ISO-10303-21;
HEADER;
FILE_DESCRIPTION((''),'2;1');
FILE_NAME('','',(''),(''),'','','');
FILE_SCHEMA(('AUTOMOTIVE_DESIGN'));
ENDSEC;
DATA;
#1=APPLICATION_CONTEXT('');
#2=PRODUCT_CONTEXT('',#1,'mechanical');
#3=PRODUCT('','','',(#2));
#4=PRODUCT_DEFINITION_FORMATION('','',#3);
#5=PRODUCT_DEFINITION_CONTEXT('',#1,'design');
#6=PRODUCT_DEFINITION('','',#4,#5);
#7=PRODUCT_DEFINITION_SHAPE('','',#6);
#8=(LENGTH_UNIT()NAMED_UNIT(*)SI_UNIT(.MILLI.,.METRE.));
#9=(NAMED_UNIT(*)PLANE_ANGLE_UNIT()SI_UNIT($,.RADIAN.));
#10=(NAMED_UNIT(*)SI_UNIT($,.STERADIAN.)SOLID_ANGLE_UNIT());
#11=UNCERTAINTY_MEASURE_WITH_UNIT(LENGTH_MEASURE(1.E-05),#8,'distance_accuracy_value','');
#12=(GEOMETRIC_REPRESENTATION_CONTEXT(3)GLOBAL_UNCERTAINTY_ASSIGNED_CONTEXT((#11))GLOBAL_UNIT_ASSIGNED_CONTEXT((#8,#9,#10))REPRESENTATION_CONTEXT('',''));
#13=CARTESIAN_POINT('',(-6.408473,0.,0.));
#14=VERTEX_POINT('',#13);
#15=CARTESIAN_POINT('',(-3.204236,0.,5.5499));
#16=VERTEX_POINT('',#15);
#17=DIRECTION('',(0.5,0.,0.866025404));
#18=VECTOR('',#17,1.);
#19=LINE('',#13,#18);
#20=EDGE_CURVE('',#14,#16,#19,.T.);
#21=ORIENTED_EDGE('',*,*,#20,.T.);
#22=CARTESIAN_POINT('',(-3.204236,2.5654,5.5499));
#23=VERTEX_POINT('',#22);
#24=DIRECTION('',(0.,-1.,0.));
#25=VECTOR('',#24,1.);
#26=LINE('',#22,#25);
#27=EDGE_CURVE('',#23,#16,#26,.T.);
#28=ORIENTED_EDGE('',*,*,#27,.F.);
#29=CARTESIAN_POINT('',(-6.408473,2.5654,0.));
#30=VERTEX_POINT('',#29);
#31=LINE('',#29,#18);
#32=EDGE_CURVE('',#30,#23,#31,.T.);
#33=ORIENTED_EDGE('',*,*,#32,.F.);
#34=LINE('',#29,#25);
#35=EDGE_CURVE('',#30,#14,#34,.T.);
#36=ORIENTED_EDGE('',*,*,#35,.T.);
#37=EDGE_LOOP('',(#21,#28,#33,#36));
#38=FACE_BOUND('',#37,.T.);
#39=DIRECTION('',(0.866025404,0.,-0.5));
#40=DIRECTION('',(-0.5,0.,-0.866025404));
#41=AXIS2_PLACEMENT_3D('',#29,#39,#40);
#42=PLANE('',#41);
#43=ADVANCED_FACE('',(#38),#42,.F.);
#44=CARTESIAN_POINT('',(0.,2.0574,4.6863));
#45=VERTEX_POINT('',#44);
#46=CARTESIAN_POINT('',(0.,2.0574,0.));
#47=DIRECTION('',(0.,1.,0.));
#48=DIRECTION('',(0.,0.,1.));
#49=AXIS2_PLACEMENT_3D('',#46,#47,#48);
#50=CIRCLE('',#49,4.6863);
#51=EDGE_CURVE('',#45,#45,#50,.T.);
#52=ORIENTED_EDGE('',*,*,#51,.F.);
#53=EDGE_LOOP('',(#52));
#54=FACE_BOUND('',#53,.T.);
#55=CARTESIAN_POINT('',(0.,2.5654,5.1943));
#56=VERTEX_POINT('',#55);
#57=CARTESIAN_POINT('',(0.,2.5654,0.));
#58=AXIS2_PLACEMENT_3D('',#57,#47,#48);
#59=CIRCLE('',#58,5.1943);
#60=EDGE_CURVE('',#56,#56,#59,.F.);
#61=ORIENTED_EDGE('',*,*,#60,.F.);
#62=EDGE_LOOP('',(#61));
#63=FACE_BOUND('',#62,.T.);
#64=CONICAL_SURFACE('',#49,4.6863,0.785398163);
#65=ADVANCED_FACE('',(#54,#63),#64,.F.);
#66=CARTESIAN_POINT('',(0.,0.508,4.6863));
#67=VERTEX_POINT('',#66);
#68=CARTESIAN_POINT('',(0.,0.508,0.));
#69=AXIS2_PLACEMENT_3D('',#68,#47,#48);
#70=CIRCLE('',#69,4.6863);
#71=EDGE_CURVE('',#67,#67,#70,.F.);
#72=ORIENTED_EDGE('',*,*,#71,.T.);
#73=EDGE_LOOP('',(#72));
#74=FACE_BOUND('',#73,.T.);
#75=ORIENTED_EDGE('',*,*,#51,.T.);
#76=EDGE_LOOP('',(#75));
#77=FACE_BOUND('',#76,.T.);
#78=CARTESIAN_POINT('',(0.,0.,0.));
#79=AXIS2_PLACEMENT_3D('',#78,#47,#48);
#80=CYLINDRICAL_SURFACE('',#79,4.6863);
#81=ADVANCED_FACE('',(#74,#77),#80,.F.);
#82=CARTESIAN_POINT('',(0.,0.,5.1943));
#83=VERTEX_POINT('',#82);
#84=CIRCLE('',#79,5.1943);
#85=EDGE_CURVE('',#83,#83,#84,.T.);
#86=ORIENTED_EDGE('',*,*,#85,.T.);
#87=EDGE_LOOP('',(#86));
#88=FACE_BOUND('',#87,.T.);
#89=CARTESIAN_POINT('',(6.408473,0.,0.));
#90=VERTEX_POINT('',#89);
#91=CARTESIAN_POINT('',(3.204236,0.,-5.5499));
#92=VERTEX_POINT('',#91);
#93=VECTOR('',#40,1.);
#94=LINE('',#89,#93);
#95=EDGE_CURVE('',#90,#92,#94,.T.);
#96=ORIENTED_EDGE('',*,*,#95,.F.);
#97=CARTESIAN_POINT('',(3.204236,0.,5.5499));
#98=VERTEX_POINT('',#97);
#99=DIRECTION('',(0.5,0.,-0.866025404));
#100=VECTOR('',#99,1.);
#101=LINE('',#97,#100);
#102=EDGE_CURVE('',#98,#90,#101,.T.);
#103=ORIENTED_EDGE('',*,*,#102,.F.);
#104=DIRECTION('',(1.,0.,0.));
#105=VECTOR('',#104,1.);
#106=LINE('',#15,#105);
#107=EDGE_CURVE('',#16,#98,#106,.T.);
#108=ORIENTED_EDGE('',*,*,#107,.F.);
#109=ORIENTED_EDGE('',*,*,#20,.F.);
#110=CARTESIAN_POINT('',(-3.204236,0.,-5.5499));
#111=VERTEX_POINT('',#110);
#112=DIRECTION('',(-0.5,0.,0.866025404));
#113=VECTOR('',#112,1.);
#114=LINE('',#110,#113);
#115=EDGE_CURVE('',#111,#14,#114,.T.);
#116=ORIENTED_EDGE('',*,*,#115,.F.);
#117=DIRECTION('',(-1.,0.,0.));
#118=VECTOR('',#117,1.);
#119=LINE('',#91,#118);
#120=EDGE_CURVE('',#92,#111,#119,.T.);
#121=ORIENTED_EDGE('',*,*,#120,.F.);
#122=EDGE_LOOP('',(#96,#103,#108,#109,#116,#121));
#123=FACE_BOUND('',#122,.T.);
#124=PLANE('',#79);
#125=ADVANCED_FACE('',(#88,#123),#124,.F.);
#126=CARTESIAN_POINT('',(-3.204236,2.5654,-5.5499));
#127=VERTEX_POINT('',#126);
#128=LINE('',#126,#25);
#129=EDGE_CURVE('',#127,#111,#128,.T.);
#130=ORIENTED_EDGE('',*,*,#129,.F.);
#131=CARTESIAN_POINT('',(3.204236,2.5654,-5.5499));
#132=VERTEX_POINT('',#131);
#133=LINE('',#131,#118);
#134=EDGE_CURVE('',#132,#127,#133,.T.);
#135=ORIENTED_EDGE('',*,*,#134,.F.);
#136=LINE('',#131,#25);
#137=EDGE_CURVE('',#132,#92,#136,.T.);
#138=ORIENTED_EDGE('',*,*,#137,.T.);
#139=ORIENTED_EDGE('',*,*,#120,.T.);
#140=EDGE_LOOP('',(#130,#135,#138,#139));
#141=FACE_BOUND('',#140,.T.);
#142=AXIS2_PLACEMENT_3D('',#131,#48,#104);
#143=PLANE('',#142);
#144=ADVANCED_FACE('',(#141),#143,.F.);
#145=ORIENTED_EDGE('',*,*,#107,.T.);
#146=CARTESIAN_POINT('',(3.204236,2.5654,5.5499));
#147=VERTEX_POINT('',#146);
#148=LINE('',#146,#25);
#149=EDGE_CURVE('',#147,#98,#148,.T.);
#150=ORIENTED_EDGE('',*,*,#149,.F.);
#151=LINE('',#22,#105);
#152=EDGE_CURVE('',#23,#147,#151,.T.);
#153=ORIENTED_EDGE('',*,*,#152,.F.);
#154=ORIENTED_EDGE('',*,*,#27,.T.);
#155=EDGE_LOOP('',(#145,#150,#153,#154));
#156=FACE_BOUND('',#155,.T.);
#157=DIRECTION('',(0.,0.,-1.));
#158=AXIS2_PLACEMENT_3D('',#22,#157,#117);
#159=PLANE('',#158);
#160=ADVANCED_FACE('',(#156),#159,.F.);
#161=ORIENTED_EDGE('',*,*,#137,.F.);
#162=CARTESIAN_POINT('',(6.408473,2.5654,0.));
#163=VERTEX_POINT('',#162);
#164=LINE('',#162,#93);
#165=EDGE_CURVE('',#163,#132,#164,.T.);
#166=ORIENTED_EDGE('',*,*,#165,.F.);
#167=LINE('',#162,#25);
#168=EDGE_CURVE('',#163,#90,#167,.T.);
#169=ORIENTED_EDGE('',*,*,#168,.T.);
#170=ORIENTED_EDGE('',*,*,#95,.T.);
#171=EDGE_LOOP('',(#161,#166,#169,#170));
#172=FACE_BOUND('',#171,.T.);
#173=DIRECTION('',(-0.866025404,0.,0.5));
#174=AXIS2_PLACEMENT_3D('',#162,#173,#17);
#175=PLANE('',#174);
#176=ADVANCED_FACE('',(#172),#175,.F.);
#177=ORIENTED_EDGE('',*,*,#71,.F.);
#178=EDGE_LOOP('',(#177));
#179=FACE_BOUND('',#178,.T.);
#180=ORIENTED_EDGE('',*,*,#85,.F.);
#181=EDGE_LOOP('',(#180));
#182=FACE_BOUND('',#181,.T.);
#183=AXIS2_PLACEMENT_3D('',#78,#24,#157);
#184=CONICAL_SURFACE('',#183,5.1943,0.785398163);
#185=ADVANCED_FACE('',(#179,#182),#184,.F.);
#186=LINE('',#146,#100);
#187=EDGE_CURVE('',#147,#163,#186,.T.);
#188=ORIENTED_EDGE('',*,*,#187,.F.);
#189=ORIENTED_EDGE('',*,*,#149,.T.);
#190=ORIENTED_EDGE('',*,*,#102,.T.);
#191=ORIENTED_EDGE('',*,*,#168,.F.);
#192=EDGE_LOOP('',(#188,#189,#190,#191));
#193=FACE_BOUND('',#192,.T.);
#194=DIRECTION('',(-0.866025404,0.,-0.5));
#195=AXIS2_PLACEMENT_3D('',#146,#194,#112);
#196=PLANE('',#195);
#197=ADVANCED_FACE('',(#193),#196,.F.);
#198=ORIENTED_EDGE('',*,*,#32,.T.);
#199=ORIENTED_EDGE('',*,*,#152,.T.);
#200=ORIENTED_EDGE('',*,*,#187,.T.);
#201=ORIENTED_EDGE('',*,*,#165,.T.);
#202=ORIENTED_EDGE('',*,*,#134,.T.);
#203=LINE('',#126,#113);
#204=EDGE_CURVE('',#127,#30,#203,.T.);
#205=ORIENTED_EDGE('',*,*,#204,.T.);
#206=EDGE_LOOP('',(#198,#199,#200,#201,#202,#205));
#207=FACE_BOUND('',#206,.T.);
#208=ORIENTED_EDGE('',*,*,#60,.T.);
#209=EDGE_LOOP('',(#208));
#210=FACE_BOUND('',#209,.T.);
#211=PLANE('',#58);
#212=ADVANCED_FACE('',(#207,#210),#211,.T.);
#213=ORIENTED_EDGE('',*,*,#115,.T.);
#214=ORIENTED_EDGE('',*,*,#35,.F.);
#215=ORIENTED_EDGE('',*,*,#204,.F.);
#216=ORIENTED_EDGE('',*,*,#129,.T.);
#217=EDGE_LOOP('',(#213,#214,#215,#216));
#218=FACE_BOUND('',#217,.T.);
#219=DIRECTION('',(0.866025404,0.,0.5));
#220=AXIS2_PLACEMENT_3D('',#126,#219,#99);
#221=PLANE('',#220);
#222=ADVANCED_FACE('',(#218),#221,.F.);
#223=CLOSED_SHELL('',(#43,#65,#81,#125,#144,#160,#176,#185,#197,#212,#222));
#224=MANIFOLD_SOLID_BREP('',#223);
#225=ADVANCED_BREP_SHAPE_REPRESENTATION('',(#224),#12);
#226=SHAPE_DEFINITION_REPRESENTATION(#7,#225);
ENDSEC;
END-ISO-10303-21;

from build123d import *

# Parameters (mm, degrees)
BOSS_EXTRUDE1_DEPTH = 2.5654
SKETCH7_R           = 4.6863
CUT_EXTRUDE1_DEPTH  = 9.857267478
FILLET1_SIZE        = 0.508
FILLET2_SIZE        = 0.508


with BuildPart() as part:
    # Sketch4 → Boss-Extrude1 (new body)
    with BuildSketch(Plane(origin=(0, 0, 0), x_dir=(1, 0, 0), z_dir=(0, 1, 0))):
        Polygon((6.408472518, 0), (3.204236259, 5.5499), (-3.204236259, 5.5499), (-6.408472518, 0), (-3.204236259, -5.5499), (3.204236259, -5.5499), align=None)
    extrude(amount=BOSS_EXTRUDE1_DEPTH)

    # Sketch7 → Cut-Extrude1 (cut, through all)
    with BuildSketch(Plane(origin=(0, 2.5654, 0), x_dir=(1, 0, 0), z_dir=(0, 1, 0))):
        Circle(SKETCH7_R)
    extrude(amount=-CUT_EXTRUDE1_DEPTH, mode=Mode.SUBTRACT)

    # Fillet1
    fillet1_edges = [part.edges().sort_by_distance(p)[0] for p in [
        (-4.6863, 2.5654, 0),
    ]]
    chamfer(fillet1_edges, length=FILLET1_SIZE)

    # Fillet2
    fillet2_edges = [part.edges().sort_by_distance(p)[0] for p in [
        (-4.6863, 0, 0),
    ]]
    chamfer(fillet2_edges, length=FILLET2_SIZE)


solid = part.part
